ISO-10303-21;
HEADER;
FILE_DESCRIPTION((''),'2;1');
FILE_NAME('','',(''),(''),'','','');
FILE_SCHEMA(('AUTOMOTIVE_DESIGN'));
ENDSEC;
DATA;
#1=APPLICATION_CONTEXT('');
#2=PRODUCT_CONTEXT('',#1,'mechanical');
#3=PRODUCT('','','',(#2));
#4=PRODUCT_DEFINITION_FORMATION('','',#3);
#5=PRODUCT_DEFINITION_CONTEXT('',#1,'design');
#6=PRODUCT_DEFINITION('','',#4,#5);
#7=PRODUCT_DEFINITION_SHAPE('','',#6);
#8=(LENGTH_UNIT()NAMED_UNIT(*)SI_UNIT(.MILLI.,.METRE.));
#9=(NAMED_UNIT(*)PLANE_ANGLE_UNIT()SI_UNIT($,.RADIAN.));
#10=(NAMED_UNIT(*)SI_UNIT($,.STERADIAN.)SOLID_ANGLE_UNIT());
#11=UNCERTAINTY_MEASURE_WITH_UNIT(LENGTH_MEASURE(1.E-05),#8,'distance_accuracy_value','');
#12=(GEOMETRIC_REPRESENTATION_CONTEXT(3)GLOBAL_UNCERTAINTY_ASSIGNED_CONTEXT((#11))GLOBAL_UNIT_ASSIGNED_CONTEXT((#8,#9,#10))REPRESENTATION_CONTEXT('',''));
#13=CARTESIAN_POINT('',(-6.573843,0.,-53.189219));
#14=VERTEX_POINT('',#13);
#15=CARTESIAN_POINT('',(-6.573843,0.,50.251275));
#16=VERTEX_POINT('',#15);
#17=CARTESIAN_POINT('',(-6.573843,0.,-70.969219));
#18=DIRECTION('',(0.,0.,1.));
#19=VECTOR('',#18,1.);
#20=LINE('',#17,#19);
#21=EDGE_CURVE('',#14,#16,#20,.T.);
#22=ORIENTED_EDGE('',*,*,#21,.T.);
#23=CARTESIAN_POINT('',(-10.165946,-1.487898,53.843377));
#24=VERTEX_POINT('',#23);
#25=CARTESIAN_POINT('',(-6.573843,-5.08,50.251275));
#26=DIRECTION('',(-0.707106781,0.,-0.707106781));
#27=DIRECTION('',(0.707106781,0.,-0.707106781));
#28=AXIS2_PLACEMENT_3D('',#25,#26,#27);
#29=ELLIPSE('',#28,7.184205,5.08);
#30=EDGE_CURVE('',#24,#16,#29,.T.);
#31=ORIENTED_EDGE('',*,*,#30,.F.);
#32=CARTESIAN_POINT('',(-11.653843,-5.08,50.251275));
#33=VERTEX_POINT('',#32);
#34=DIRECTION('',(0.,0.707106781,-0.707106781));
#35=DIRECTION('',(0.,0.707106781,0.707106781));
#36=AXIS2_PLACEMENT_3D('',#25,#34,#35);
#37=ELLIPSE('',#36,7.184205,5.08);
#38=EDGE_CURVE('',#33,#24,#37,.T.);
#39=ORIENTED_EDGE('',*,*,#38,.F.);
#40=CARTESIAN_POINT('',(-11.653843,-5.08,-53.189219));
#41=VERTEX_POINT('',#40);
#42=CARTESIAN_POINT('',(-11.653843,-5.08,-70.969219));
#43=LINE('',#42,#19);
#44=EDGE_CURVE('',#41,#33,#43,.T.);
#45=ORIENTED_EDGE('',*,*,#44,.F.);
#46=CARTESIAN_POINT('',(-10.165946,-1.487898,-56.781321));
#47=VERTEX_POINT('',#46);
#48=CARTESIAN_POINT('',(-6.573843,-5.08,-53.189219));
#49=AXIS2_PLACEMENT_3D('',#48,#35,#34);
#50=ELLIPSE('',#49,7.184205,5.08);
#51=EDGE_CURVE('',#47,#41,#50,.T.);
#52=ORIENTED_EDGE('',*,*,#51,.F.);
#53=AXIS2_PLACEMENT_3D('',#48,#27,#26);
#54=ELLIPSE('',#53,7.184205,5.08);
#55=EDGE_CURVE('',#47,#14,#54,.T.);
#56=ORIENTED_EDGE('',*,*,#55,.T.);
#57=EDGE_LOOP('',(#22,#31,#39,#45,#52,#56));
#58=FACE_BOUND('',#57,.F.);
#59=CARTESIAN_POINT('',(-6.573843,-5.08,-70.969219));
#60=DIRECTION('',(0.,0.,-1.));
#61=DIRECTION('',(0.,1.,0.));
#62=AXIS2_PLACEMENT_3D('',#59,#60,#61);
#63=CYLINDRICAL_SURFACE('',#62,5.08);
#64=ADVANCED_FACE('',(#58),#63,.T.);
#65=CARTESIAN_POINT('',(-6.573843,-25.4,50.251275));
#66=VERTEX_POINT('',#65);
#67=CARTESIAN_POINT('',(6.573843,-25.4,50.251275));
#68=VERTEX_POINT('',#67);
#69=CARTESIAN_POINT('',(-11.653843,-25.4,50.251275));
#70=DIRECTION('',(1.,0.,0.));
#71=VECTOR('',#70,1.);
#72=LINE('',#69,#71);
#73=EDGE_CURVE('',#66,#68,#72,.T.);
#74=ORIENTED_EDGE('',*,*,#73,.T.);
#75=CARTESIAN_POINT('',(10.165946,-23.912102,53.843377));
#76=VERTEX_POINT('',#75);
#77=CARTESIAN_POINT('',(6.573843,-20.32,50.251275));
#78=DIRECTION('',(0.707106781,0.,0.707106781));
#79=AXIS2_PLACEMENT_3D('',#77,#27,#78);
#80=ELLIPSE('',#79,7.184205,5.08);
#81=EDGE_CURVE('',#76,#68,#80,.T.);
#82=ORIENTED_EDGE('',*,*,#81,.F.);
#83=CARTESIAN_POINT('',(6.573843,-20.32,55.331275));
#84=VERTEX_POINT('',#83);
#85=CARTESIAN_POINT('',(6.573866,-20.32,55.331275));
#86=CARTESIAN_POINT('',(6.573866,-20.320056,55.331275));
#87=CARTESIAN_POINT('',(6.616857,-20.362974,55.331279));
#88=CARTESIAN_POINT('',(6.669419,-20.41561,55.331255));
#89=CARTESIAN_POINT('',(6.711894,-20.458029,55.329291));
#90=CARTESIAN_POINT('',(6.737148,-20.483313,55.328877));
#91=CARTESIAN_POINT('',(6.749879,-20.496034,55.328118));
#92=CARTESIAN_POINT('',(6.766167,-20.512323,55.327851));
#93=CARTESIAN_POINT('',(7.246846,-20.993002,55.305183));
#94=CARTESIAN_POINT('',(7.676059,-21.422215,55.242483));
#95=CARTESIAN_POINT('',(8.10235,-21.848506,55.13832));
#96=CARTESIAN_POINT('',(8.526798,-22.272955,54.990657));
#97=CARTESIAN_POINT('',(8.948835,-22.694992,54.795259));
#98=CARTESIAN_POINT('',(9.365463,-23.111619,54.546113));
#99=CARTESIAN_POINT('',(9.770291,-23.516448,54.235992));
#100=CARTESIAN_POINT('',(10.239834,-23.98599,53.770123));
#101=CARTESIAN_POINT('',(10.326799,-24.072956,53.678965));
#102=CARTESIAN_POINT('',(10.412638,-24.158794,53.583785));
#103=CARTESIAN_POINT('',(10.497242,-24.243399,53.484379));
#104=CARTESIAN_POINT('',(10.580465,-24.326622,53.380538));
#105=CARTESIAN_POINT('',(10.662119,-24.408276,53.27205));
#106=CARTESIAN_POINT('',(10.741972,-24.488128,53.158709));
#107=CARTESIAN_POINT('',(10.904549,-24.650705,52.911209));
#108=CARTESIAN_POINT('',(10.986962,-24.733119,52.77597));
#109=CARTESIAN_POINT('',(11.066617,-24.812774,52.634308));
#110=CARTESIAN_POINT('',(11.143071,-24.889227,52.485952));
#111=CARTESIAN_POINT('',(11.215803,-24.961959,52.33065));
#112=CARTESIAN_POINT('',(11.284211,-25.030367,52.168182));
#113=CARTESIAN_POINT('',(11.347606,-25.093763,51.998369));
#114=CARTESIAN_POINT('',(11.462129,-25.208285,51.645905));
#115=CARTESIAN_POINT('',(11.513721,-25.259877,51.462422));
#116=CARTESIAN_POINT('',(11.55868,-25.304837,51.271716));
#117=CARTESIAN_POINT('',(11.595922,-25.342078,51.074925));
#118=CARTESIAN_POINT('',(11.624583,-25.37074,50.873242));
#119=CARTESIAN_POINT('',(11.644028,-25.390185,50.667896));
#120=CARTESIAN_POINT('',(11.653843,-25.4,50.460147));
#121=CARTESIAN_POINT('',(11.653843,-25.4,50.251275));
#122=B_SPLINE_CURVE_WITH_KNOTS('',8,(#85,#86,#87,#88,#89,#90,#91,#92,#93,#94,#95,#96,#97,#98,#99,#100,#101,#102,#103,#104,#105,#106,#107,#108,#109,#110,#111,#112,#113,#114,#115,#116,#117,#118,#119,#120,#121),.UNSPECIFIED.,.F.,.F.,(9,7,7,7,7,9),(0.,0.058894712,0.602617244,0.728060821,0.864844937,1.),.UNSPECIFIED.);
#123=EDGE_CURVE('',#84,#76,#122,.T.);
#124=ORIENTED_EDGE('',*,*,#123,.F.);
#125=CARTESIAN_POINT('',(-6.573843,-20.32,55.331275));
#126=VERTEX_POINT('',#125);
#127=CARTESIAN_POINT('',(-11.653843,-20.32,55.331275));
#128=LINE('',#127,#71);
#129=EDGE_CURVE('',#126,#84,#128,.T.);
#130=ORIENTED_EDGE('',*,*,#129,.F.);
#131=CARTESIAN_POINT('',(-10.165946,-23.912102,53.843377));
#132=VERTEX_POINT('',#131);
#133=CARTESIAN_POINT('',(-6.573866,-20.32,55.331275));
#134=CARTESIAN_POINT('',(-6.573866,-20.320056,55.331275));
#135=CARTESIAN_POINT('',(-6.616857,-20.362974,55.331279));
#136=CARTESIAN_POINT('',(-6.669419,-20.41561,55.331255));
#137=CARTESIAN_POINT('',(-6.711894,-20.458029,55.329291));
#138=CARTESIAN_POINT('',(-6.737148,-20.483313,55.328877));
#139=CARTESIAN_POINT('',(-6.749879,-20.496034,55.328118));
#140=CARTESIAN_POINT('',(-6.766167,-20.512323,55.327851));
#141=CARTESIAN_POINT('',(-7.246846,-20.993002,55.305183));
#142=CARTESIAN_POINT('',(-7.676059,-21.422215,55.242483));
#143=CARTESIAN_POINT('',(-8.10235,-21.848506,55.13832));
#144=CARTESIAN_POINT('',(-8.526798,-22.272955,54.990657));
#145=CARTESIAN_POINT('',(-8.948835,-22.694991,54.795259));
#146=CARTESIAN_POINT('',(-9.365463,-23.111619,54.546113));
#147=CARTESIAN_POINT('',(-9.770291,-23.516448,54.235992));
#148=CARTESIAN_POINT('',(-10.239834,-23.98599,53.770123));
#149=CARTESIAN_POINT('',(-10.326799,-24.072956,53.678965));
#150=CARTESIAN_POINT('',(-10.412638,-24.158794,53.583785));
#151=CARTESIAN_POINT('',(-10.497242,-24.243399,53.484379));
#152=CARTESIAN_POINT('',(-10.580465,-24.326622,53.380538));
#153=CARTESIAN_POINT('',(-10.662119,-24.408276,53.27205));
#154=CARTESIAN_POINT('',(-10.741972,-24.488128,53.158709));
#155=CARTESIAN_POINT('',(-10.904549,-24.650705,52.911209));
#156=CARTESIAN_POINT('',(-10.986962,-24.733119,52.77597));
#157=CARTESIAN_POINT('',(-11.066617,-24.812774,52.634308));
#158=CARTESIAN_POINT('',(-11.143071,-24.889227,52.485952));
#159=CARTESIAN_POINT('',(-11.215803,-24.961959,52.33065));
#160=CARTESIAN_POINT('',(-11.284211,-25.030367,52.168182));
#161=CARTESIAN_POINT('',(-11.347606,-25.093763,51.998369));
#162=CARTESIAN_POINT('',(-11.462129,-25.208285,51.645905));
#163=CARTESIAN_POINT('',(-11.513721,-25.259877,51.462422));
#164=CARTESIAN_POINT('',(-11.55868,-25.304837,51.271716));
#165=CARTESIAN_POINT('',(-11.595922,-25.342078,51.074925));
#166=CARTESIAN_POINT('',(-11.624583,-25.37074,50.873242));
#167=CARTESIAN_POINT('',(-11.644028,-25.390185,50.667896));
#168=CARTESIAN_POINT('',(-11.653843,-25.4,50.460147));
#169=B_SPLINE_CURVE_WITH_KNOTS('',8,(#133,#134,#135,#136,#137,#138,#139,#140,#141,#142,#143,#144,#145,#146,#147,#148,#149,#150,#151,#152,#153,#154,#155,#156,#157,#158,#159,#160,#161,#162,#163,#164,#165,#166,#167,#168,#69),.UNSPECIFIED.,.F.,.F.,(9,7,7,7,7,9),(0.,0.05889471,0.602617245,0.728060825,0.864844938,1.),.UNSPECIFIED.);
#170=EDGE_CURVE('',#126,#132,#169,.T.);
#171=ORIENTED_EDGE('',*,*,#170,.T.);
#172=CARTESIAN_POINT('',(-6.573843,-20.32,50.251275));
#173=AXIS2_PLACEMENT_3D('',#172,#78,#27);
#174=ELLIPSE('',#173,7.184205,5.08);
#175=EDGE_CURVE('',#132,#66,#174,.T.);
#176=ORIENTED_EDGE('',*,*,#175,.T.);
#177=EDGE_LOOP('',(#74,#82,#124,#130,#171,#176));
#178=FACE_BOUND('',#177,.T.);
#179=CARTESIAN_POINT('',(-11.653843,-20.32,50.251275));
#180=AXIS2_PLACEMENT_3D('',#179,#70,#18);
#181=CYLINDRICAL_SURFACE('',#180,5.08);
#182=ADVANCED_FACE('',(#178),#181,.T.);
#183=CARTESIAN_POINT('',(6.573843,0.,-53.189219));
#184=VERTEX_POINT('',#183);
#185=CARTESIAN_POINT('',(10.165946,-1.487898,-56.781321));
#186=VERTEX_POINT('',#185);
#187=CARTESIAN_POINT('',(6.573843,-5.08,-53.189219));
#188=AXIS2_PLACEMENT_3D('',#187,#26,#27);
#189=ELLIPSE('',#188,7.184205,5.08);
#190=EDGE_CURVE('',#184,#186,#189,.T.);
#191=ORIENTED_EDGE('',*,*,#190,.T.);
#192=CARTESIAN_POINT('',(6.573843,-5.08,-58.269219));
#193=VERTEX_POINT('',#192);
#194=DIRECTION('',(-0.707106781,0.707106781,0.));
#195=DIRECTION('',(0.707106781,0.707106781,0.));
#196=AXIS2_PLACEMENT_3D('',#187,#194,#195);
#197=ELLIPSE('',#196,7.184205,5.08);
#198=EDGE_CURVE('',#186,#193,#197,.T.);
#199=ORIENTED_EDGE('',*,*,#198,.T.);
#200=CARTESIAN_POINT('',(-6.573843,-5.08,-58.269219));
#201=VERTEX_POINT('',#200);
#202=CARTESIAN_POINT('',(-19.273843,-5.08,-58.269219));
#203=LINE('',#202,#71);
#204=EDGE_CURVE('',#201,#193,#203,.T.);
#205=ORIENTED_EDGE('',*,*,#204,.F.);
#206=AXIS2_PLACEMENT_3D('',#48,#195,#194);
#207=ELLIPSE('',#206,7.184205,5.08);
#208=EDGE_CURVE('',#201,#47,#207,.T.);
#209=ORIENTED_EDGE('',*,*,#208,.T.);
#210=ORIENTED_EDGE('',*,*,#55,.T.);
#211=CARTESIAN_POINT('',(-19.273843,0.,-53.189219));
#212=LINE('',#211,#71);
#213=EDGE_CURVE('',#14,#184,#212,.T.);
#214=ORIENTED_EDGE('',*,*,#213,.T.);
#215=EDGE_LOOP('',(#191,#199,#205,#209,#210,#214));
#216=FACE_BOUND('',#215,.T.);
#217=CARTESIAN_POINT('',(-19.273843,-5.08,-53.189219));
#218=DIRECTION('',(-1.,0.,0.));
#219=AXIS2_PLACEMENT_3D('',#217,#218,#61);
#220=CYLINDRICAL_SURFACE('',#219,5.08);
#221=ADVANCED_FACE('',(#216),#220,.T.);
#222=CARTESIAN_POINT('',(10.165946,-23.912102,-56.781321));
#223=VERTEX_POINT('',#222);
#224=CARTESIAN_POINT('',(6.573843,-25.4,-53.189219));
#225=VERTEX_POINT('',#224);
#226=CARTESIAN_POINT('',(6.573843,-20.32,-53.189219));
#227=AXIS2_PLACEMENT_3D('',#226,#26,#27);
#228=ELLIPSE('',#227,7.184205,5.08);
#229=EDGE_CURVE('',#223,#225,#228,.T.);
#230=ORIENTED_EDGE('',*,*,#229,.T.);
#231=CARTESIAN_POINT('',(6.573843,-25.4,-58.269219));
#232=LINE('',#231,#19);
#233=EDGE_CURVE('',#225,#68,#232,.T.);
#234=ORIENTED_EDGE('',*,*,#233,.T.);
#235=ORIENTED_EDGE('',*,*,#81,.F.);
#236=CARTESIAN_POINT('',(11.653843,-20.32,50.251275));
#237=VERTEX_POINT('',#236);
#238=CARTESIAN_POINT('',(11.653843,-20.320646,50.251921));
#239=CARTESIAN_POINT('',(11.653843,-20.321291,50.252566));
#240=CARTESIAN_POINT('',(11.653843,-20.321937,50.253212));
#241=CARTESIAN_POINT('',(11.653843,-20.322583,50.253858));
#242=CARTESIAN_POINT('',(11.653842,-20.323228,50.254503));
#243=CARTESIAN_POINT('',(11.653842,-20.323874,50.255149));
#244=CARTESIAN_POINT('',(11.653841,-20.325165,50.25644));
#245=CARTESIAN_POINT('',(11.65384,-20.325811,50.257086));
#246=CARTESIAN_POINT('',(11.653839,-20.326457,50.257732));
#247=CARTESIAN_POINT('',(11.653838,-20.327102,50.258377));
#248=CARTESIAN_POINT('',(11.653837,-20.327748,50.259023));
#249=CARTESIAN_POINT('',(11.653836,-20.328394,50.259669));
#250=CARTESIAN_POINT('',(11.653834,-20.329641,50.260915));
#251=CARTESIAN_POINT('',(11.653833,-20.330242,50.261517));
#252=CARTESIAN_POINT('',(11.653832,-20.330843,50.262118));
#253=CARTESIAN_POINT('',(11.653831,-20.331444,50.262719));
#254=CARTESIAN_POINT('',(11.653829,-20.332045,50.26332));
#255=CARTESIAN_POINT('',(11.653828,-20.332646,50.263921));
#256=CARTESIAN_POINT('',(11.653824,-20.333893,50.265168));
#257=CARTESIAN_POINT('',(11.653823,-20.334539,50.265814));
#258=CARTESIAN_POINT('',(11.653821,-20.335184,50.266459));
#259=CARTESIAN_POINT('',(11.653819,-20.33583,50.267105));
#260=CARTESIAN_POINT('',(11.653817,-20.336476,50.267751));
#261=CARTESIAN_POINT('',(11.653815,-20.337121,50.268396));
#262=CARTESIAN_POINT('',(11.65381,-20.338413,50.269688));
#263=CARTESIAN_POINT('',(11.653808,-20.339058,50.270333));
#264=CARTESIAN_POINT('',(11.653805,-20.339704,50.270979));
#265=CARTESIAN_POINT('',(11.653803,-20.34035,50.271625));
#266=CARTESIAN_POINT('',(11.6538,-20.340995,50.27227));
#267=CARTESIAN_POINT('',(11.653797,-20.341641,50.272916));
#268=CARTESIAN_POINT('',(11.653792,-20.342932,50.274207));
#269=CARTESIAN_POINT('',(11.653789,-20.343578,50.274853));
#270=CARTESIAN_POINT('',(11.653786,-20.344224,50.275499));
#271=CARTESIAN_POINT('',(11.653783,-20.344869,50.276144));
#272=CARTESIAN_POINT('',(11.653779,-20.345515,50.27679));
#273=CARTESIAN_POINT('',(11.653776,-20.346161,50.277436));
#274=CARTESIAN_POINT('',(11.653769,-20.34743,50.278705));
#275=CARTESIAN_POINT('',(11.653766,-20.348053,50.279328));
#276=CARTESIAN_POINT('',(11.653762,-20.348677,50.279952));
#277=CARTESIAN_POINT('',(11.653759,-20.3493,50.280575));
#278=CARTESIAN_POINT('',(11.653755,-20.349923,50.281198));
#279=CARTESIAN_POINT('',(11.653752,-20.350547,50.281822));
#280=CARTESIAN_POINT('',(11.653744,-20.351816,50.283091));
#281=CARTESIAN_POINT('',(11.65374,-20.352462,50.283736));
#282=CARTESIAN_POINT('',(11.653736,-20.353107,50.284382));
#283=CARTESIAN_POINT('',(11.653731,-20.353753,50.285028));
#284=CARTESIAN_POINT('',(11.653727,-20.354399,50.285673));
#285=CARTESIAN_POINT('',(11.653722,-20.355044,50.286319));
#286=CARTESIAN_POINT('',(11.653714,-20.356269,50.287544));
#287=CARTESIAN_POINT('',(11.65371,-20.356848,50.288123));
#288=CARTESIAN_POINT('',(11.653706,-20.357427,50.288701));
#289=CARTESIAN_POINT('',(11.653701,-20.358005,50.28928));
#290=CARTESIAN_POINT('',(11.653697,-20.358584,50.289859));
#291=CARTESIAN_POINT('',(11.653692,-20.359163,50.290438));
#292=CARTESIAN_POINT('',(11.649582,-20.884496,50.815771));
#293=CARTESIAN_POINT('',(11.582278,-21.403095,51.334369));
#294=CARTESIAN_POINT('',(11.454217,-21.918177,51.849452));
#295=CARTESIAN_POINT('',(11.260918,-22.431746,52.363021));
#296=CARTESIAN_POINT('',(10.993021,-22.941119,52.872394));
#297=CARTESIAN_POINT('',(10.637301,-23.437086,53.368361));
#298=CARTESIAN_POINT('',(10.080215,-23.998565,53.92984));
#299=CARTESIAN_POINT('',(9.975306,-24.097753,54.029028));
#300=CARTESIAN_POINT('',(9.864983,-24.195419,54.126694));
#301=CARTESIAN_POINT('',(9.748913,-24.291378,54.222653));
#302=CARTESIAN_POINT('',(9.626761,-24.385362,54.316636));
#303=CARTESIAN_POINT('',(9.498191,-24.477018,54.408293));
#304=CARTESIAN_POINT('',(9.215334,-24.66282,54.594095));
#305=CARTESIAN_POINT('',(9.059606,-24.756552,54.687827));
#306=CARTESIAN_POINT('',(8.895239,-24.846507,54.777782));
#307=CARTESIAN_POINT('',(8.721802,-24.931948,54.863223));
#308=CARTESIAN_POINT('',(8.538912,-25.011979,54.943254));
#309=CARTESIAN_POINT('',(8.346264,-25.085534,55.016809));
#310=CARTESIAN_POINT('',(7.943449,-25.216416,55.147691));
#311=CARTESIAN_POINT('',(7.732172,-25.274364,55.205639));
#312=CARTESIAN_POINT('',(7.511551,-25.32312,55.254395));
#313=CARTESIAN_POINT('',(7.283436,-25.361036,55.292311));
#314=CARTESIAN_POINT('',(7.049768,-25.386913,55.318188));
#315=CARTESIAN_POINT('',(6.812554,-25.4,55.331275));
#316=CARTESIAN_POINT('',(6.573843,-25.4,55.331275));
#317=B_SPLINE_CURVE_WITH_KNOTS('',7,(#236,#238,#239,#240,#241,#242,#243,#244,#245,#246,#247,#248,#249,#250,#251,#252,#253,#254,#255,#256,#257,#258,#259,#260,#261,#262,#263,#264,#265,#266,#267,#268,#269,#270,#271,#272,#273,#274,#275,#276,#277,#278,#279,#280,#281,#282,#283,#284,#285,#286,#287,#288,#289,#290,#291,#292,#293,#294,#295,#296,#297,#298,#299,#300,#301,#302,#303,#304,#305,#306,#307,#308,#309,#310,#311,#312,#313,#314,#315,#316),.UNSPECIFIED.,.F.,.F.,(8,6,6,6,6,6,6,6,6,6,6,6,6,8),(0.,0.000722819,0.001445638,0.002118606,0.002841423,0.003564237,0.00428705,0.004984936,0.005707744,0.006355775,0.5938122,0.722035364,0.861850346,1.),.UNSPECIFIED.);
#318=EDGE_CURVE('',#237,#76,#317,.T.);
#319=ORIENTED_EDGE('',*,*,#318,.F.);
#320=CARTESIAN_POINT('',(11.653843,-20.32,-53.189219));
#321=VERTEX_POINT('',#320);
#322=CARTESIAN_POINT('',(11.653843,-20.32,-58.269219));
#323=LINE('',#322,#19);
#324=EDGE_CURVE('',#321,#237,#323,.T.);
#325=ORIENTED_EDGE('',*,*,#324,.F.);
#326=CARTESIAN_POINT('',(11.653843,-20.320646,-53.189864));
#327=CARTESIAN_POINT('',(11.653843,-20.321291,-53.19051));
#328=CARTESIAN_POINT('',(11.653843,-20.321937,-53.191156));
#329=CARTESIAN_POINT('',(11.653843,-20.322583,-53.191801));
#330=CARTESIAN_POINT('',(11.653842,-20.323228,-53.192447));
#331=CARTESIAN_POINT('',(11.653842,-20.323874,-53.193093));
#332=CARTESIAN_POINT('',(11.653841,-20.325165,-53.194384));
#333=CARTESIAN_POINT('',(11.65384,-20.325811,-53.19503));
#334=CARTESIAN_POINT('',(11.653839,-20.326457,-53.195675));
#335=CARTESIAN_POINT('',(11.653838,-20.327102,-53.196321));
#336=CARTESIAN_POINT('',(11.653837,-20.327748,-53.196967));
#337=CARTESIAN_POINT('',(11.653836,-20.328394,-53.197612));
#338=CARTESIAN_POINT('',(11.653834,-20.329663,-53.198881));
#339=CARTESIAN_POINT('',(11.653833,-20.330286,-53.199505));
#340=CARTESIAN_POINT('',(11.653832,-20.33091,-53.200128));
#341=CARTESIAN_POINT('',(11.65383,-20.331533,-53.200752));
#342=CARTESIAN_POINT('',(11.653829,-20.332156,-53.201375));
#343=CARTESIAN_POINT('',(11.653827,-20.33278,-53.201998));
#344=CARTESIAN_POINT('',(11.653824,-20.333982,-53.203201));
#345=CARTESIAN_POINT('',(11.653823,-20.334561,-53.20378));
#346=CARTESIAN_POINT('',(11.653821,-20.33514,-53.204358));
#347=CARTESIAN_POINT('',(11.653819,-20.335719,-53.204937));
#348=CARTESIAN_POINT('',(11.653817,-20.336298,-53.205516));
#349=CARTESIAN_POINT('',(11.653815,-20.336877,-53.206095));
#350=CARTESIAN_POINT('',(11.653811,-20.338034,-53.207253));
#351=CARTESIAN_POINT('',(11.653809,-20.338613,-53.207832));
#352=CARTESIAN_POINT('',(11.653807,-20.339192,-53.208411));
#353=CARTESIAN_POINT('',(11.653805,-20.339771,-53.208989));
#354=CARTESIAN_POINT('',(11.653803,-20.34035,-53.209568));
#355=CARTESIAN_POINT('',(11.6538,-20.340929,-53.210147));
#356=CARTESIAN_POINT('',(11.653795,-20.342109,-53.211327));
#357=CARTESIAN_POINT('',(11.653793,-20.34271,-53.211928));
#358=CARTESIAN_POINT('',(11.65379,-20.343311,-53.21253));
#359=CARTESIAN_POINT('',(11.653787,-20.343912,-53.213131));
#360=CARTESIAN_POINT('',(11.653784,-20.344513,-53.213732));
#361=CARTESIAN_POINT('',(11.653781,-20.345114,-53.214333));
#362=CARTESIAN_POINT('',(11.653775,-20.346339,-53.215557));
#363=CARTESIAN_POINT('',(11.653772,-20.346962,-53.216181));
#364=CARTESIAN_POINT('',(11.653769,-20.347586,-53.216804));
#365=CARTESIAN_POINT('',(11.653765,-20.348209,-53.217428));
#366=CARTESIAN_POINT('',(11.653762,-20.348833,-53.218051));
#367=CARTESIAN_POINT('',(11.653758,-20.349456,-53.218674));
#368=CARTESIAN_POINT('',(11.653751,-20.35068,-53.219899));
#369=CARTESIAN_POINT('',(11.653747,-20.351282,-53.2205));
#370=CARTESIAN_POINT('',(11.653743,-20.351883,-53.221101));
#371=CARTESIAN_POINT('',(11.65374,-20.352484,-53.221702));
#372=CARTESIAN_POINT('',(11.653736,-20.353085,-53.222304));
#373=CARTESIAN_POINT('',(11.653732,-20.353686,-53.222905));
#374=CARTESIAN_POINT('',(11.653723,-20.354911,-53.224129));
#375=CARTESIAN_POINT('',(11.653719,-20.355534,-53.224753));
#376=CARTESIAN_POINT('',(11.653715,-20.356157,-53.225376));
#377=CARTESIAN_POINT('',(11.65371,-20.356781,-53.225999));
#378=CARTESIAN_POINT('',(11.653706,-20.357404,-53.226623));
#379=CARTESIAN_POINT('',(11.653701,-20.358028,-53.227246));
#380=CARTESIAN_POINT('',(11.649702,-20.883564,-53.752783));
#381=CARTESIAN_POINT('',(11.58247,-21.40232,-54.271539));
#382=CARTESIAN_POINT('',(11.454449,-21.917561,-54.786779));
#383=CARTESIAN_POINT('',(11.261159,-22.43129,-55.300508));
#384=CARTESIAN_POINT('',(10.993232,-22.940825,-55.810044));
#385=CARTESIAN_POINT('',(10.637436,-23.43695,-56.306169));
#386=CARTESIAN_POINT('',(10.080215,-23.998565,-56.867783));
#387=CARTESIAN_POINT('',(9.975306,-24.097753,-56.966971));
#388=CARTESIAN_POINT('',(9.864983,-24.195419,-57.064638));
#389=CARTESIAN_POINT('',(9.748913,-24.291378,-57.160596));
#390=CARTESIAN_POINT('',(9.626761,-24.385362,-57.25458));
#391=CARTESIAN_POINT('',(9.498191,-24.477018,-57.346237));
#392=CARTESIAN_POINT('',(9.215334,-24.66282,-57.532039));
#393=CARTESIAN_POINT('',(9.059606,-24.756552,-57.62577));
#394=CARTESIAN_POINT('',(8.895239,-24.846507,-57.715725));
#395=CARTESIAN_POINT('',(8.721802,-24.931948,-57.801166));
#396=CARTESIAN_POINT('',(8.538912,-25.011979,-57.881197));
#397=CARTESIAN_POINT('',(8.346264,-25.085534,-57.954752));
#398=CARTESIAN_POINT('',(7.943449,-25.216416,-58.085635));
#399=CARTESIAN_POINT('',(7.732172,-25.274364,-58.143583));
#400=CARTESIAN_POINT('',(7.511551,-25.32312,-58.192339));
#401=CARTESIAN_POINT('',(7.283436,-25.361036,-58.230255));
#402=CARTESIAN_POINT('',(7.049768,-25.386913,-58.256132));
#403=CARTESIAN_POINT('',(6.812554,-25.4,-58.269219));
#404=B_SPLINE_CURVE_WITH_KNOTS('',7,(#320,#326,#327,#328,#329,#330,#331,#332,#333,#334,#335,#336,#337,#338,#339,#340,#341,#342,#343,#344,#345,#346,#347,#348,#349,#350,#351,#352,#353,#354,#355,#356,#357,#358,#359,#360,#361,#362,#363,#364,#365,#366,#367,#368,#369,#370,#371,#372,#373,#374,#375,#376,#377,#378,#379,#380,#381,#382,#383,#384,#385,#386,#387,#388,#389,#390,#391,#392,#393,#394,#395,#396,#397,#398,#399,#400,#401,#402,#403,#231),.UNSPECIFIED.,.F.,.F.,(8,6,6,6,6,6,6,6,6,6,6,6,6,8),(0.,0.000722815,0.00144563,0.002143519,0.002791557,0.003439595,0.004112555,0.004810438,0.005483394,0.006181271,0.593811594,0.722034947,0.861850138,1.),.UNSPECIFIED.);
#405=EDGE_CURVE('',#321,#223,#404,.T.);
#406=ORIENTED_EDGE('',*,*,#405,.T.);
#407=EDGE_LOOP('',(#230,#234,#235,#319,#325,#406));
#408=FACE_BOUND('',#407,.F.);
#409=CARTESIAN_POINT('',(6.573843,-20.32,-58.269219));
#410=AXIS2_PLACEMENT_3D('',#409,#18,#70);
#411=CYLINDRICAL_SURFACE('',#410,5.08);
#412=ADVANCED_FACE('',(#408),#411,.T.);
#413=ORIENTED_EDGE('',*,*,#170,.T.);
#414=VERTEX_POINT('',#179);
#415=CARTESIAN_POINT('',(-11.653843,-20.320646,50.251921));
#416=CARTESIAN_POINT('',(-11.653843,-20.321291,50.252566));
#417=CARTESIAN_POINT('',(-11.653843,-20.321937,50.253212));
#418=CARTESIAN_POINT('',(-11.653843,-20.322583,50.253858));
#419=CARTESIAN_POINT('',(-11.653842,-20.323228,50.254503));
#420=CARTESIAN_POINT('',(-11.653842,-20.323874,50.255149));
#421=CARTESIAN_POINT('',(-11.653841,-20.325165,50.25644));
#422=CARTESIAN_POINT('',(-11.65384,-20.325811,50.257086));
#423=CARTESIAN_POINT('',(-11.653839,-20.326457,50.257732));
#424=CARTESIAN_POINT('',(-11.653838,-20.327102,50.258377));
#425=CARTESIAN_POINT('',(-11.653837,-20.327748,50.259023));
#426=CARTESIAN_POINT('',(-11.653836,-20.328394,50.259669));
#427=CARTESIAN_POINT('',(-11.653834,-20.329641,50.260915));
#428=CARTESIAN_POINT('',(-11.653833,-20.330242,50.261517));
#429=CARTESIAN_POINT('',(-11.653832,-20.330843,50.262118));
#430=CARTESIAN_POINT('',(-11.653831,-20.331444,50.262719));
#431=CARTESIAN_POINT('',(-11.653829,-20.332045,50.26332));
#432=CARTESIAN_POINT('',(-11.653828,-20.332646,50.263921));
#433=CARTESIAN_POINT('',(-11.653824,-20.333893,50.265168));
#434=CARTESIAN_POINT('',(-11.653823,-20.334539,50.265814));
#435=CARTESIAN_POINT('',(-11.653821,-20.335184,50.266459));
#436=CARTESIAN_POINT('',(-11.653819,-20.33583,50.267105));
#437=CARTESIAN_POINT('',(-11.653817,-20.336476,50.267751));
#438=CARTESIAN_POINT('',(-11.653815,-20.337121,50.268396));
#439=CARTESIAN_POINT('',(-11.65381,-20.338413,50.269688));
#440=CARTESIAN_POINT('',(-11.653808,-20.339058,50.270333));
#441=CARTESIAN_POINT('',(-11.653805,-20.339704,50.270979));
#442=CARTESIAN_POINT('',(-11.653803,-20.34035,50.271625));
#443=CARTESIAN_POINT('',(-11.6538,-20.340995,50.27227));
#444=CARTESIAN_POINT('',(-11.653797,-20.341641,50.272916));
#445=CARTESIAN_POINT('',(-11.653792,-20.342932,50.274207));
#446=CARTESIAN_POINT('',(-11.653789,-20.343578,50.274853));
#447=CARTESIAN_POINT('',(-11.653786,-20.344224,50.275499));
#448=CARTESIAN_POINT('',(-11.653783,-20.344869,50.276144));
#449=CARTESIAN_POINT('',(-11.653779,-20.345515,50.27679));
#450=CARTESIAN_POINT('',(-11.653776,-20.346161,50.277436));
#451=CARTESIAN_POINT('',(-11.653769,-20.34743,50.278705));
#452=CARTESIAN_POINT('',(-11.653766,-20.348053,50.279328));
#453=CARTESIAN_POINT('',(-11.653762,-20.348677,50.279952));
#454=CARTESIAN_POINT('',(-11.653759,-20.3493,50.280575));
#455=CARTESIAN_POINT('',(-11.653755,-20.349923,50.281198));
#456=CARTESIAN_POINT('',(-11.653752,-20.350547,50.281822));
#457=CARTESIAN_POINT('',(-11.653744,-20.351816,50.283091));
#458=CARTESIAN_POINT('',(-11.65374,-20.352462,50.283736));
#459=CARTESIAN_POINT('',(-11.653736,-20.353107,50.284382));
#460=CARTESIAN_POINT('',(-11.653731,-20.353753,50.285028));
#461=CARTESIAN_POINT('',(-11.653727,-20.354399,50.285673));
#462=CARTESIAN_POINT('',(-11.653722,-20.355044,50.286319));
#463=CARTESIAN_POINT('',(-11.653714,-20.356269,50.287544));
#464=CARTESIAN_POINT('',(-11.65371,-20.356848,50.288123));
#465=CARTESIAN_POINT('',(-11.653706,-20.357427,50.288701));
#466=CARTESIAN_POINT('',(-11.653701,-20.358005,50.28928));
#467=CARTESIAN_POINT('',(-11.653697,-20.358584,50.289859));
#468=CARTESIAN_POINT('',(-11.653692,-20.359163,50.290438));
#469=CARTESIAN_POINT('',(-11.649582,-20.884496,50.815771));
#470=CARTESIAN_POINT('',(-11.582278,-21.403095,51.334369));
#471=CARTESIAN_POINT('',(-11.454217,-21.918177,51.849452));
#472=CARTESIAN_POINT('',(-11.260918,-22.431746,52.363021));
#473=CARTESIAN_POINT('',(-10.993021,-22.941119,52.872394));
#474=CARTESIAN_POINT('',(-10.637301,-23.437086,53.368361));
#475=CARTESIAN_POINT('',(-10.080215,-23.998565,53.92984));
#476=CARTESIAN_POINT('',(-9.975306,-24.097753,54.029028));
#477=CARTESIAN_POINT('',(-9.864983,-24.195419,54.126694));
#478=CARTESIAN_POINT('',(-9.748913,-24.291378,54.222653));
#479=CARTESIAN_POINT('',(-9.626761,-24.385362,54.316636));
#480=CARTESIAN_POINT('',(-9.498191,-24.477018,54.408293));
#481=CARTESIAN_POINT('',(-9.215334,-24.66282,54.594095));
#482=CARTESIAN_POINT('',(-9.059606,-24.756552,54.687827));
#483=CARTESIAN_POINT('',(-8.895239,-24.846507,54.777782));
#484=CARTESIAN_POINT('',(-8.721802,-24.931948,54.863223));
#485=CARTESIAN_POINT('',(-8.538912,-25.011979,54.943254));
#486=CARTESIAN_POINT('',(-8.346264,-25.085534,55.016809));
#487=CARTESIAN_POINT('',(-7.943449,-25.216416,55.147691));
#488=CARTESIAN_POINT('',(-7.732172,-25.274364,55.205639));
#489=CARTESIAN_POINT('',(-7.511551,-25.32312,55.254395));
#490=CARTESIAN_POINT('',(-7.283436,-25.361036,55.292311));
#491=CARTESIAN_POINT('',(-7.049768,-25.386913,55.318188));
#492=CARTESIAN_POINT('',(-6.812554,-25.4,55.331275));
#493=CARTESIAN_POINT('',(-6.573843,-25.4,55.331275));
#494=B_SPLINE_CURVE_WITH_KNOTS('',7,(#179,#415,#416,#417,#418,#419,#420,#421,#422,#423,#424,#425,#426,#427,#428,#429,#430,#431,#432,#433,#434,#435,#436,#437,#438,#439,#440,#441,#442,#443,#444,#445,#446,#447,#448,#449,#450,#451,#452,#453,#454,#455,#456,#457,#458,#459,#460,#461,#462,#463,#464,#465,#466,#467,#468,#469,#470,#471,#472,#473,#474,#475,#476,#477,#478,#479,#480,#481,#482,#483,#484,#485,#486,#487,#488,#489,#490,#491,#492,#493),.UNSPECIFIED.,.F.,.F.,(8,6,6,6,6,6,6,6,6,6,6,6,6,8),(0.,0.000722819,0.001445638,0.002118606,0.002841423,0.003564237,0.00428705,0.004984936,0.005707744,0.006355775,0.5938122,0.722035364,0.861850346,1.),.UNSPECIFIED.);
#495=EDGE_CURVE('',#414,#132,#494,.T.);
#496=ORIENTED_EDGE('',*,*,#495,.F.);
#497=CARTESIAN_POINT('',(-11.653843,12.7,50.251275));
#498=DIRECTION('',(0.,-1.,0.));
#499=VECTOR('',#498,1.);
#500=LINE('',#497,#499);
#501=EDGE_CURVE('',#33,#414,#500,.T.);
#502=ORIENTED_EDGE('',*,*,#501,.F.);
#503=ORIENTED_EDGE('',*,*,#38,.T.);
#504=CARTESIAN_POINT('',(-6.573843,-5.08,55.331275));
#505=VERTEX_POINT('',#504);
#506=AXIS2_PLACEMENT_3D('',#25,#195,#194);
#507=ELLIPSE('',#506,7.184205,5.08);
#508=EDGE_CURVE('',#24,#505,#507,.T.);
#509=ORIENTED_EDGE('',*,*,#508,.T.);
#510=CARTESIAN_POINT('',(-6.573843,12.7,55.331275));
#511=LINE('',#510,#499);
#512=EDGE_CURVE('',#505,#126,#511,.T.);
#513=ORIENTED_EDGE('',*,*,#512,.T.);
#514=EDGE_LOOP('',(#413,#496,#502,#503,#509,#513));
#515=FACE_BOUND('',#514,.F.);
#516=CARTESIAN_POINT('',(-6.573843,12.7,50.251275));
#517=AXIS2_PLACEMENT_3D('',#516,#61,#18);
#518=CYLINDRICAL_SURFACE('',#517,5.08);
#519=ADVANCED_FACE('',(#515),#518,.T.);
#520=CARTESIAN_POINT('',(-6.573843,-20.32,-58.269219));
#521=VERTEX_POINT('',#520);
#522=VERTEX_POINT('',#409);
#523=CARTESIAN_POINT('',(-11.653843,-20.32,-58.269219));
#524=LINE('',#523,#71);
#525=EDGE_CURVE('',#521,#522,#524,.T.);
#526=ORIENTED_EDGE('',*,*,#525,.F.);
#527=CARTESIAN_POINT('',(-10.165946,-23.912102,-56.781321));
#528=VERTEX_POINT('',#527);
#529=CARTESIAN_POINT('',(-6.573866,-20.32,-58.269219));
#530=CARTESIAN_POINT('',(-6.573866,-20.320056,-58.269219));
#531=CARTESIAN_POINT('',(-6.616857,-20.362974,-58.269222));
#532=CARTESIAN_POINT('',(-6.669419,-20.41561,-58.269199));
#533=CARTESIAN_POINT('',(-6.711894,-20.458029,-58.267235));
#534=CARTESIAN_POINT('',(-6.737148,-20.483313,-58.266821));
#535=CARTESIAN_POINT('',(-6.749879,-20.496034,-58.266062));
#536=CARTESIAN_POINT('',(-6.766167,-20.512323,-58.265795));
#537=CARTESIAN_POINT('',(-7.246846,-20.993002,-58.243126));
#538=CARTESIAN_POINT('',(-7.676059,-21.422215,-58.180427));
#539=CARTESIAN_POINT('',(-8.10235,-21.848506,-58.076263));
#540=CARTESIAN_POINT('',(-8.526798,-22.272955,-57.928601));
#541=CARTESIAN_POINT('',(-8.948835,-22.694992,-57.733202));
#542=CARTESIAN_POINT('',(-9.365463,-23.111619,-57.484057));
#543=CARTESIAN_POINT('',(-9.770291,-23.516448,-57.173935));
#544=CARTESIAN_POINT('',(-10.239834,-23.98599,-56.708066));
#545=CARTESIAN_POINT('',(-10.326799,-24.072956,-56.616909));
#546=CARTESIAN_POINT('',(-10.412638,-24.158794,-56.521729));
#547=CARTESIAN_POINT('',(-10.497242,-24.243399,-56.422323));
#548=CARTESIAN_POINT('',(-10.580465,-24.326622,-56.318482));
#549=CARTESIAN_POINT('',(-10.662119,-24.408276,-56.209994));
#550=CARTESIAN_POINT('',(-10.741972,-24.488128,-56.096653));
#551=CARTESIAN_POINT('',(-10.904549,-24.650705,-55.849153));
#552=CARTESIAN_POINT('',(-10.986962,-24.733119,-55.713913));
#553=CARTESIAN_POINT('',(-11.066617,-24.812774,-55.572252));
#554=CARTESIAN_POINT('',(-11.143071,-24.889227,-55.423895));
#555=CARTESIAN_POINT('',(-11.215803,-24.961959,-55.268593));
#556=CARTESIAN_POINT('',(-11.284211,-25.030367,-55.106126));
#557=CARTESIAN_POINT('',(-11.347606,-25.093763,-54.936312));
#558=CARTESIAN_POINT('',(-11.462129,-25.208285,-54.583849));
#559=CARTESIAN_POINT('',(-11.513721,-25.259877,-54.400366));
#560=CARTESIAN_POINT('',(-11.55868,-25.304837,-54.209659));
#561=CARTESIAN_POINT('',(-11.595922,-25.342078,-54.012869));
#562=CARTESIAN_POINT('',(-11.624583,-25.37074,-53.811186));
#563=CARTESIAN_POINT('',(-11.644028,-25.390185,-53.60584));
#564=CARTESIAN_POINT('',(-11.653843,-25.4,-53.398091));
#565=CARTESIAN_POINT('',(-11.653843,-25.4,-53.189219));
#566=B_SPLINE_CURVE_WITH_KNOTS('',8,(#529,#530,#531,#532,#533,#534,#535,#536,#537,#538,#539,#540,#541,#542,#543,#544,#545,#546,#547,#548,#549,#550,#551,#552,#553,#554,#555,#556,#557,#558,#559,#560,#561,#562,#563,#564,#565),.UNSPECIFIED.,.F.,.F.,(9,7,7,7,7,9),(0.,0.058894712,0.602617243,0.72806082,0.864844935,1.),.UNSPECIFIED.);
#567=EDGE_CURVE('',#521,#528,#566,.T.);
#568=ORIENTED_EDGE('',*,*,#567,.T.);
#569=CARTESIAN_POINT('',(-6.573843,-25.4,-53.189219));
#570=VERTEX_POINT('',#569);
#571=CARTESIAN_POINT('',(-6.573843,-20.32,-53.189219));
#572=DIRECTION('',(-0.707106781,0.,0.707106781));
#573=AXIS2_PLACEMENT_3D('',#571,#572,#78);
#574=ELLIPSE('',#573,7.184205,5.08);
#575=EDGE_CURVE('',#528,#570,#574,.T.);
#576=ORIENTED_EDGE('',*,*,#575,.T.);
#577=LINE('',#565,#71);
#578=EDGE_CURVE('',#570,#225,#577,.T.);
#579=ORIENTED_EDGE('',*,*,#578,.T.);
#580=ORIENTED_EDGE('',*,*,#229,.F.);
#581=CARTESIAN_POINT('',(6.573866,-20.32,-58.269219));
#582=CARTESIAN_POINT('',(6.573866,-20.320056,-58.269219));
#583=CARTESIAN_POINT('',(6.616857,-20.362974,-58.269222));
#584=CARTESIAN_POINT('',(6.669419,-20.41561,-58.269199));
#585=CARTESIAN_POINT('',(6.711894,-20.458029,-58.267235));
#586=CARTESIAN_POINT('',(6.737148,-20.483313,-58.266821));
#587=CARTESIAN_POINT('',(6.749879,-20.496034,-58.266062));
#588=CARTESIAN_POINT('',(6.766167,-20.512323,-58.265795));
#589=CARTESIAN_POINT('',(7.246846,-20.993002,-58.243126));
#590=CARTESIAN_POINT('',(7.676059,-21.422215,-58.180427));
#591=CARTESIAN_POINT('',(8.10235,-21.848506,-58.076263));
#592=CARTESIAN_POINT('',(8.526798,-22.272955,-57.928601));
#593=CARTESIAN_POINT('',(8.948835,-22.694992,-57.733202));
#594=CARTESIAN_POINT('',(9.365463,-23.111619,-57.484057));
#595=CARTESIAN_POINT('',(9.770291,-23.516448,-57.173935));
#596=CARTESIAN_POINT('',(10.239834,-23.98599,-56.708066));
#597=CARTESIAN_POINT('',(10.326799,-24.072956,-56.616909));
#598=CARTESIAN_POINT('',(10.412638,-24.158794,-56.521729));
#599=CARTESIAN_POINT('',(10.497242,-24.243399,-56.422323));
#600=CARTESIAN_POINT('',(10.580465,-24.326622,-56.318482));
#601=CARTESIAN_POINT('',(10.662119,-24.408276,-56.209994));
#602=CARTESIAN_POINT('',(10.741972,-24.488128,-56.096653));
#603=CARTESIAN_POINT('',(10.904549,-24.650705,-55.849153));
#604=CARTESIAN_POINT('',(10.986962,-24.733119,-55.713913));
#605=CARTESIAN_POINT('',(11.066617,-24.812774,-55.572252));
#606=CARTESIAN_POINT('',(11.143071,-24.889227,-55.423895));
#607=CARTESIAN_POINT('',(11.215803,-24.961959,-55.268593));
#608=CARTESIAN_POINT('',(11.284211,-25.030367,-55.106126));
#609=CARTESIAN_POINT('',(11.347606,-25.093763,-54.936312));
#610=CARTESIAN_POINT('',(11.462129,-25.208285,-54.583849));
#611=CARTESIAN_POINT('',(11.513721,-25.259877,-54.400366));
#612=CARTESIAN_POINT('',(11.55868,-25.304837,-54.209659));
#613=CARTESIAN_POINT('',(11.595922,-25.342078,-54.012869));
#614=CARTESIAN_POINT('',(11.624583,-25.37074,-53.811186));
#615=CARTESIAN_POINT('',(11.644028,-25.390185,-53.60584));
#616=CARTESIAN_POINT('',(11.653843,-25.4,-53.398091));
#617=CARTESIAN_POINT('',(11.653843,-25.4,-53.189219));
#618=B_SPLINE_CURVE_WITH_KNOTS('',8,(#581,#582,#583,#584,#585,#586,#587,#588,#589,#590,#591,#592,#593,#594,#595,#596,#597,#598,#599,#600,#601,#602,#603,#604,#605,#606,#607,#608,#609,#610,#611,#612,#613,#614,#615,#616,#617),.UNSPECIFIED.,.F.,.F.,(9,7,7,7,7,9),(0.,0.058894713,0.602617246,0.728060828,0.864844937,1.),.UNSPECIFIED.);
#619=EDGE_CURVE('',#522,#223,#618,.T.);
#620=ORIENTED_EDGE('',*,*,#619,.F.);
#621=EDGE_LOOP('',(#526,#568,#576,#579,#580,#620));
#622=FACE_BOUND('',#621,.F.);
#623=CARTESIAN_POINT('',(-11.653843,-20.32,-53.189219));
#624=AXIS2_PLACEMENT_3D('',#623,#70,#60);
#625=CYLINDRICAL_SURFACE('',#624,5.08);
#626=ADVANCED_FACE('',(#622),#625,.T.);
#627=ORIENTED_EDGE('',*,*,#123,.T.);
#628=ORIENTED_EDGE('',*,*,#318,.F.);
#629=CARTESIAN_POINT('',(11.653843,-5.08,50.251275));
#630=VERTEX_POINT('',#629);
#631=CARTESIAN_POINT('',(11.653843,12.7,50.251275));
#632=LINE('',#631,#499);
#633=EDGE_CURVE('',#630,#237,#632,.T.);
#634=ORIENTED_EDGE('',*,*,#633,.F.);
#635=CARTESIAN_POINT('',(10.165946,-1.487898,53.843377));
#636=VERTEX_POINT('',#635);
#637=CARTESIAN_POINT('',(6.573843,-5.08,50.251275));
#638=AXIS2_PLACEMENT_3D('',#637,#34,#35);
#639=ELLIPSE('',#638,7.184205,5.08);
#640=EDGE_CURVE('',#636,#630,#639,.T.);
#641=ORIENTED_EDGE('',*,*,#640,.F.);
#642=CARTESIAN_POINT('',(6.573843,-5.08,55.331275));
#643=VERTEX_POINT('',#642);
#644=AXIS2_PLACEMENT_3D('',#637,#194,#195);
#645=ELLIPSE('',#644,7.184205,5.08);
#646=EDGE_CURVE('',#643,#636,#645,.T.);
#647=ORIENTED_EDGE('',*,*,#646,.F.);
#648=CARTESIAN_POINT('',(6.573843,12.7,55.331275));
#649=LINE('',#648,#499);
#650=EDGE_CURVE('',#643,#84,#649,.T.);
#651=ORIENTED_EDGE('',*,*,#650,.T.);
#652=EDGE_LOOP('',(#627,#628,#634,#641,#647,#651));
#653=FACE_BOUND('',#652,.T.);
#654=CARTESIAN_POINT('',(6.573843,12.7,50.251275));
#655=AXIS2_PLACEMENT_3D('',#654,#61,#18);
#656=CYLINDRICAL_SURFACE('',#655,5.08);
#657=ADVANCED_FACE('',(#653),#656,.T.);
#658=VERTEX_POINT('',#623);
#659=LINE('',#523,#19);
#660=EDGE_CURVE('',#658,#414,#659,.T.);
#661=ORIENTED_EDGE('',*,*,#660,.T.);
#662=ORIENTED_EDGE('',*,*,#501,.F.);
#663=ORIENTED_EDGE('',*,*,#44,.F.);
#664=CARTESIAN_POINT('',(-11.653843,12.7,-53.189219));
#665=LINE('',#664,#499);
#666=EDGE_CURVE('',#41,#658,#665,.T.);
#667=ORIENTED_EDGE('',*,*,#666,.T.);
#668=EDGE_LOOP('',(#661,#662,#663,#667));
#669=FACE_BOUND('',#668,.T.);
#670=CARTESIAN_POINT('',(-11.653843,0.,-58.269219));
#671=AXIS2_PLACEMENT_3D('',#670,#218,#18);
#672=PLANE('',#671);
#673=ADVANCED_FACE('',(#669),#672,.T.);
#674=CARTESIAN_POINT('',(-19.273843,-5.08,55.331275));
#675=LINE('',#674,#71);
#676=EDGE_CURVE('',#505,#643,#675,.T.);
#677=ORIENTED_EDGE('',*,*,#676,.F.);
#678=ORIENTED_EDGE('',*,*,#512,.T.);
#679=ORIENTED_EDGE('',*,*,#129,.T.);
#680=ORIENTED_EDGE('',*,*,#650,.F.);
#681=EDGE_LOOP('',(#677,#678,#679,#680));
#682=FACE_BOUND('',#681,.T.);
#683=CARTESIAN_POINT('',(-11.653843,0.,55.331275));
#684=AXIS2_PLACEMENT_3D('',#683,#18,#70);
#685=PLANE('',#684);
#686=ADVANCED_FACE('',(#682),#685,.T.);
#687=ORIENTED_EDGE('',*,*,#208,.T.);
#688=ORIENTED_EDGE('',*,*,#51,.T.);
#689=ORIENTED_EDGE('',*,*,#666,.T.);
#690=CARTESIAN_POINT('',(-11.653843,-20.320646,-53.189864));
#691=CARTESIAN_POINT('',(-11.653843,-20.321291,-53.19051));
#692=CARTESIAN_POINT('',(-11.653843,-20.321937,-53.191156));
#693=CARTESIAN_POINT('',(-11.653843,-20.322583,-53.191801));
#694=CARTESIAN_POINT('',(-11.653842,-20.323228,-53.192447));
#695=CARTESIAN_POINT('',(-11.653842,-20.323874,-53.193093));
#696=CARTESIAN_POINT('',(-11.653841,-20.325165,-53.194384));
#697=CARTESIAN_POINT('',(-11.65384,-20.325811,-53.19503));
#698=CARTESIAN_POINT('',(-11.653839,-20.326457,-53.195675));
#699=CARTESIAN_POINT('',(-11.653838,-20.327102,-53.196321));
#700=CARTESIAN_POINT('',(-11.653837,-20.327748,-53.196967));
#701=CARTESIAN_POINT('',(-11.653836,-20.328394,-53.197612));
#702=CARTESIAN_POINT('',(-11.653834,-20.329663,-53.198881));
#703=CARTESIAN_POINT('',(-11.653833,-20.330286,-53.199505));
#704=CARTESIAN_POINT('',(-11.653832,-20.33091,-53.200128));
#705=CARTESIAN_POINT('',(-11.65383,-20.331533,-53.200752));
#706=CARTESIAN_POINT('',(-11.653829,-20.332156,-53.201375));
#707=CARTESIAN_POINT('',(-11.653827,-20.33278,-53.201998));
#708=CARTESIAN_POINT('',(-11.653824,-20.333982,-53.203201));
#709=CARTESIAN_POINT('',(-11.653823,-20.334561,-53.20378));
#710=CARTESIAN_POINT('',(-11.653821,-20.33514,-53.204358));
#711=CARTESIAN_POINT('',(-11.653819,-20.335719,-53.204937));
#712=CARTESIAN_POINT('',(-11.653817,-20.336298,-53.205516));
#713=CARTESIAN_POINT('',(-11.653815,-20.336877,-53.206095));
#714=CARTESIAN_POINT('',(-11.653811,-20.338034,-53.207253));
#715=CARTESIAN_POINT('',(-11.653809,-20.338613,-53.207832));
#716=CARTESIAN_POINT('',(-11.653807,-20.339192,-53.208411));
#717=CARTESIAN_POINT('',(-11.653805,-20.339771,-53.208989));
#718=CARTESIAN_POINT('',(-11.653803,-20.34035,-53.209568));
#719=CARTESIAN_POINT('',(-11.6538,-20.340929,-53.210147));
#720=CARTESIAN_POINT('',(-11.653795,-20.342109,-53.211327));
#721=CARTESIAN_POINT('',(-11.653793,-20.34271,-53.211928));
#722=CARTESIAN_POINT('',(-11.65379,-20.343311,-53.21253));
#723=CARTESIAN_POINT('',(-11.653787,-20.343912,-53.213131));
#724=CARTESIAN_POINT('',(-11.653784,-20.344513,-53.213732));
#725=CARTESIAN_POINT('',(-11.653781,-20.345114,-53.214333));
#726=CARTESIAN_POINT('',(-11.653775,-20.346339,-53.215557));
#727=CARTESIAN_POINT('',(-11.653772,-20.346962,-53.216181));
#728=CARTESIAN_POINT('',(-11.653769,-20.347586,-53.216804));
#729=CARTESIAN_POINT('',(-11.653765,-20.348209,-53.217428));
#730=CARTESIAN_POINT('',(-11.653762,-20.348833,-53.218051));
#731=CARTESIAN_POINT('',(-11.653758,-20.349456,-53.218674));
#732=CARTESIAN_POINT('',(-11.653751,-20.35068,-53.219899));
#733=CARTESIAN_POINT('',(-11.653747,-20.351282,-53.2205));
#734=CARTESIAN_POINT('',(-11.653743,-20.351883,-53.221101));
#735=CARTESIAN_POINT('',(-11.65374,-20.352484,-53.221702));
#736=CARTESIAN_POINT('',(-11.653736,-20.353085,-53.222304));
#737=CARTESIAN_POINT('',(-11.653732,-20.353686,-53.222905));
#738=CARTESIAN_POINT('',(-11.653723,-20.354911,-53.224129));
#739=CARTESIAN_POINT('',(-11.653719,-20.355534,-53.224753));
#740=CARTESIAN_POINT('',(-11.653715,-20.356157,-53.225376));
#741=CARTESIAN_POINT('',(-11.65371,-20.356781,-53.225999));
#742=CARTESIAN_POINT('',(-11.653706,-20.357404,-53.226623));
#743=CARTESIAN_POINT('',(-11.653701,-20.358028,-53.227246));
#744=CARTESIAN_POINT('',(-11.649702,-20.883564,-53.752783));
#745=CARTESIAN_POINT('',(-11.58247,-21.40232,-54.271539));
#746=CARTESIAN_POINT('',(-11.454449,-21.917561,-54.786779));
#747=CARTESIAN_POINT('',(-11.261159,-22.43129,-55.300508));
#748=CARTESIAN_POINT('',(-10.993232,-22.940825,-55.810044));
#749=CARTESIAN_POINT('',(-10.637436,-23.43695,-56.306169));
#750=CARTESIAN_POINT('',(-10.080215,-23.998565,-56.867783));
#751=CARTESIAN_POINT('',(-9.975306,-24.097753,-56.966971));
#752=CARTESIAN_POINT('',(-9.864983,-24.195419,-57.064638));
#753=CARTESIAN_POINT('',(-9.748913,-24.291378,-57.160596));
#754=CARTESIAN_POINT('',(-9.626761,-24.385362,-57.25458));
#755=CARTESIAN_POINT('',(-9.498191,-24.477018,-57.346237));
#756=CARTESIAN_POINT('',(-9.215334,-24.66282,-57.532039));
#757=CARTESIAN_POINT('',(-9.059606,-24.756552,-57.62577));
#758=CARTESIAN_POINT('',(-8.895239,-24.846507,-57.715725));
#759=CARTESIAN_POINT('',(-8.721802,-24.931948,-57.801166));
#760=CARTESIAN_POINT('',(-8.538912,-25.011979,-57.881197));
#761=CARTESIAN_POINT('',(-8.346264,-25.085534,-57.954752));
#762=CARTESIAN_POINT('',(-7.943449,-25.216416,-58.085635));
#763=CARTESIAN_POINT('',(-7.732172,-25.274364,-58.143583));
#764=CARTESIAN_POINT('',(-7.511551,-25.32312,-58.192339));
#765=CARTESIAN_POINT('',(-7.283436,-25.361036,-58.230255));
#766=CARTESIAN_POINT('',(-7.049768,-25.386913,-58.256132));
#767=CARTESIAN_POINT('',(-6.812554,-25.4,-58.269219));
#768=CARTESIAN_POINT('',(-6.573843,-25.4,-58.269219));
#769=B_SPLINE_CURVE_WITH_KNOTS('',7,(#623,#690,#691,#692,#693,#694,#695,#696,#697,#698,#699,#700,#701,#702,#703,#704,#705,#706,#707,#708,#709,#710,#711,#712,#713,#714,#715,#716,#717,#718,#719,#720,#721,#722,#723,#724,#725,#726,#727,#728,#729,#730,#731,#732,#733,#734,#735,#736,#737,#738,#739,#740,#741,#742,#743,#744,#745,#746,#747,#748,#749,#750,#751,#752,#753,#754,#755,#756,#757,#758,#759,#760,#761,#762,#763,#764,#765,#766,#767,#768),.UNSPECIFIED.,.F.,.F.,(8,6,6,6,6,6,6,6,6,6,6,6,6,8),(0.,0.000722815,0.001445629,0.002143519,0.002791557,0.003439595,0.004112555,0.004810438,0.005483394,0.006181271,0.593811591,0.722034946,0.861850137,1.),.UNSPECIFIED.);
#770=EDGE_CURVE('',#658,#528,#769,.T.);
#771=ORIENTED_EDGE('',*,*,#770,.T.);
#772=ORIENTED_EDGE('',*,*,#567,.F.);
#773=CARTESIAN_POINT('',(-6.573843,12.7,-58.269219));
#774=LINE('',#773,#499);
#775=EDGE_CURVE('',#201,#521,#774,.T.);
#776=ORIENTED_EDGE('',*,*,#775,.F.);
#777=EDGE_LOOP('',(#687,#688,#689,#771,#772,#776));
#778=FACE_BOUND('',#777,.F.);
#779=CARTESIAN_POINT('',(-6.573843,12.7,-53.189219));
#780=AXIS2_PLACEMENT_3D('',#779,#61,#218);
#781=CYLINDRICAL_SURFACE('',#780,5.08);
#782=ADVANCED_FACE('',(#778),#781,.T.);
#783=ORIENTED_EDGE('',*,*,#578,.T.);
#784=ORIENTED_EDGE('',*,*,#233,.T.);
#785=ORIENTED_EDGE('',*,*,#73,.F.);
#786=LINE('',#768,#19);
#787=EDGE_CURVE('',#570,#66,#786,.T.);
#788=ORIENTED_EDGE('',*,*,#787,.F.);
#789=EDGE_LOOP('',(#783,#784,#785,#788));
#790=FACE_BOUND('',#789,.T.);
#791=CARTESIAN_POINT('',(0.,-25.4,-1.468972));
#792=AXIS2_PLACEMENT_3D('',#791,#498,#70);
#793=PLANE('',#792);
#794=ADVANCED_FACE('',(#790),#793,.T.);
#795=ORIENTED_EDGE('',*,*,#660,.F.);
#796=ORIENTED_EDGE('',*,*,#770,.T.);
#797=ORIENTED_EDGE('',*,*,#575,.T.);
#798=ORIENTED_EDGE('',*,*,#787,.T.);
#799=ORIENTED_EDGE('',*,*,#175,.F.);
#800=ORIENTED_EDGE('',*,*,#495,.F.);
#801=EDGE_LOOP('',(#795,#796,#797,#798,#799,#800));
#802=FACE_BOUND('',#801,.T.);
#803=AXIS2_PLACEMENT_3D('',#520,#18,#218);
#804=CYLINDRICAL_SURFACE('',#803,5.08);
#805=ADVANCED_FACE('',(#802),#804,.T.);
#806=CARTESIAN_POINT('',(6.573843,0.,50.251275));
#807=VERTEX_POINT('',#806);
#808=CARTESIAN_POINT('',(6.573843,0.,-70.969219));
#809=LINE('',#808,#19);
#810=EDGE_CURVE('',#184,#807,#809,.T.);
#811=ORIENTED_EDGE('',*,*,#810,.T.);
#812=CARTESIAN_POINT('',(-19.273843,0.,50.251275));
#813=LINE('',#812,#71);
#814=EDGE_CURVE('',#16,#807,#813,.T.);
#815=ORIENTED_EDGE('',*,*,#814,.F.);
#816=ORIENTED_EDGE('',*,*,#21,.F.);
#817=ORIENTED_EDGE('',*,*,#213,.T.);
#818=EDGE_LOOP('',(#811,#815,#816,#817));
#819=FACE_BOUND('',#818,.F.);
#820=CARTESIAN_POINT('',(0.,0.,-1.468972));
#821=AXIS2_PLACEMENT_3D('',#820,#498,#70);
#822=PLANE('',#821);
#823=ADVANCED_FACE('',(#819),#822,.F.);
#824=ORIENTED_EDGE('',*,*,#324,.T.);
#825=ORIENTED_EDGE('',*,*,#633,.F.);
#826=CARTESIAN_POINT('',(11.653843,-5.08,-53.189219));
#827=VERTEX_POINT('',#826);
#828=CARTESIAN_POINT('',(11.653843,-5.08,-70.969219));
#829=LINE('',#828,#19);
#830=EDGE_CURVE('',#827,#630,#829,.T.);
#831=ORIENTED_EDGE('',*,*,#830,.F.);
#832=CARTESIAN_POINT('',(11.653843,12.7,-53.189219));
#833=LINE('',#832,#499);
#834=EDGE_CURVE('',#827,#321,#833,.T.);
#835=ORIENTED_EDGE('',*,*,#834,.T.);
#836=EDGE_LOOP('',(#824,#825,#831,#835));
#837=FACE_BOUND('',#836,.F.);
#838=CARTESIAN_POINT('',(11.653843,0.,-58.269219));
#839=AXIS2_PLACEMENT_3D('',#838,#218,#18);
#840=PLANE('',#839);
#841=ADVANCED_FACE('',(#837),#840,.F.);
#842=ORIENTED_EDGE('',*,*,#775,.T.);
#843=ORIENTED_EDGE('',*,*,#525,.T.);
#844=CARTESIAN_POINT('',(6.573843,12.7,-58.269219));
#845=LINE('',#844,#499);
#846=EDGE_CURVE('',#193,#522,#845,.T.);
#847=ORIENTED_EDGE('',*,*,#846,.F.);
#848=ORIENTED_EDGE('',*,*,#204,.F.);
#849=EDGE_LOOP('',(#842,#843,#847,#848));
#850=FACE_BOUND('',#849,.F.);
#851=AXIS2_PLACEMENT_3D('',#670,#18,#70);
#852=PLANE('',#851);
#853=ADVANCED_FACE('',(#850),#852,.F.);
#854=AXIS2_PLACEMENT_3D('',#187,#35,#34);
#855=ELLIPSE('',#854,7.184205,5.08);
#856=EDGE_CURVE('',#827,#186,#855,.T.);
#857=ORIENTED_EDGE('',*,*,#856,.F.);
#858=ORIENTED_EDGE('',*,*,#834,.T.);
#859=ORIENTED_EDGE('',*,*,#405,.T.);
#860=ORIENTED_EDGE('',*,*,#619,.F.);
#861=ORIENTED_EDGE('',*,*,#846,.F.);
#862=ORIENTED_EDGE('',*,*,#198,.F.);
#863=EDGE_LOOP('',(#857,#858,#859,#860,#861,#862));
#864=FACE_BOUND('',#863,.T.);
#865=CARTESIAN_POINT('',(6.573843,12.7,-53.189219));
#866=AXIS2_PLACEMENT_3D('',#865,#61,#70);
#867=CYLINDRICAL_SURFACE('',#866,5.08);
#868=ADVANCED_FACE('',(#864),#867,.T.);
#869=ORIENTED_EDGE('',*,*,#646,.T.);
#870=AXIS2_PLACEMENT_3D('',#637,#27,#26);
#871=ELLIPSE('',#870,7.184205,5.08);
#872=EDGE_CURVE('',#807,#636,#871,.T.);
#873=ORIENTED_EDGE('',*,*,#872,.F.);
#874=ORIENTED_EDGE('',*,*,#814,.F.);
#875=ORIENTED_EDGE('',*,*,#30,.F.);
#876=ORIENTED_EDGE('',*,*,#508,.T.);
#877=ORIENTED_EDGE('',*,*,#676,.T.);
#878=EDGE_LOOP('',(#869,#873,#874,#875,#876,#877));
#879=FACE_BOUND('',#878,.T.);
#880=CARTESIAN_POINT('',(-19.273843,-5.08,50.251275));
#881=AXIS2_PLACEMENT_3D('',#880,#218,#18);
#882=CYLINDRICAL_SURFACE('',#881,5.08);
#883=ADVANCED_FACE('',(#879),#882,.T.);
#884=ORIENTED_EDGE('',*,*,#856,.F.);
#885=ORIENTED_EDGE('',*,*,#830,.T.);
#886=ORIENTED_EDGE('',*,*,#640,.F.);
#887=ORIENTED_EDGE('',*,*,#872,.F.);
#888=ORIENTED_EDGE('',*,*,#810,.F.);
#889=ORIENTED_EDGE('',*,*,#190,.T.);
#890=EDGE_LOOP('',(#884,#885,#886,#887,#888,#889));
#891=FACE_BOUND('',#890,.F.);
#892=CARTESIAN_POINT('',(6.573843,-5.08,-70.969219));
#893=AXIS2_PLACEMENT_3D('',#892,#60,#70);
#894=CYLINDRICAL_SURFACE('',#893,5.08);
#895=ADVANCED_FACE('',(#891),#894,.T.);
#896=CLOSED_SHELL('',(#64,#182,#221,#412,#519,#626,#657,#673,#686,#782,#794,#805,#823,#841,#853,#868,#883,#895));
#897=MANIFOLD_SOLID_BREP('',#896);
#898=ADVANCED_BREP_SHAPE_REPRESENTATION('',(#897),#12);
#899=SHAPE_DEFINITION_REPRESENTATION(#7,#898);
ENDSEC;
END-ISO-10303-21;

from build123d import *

# Parameters (mm, degrees)
F0_W        = 23.3076866716
F0_H        = 113.6004934087
F1_DEPTH    = 25.4
F2_R        = 5.08
F3_T1_DEPTH = 45.72
F3_T3_DEPTH = 139.0004934087
F4_T1_DEPTH = 45.72
F4_T3_DEPTH = 139.0004934087
F5_T1_DEPTH = 38.5476866716


# Not quite as in the source:
# - a fillet or chamfer that OpenCascade refuses, or shapes differently, is made with other operations: its cross-section is extruded or revolved along the edge and cut away or added


with BuildPart() as f1:
    # F0 (on Front) → F1 (new body)
    with BuildSketch(Plane.XZ):
        with Locations((0, -1.4689718373)):
            Rectangle(F0_W, F0_H)
    extrude(amount=F1_DEPTH)

    # F2
    f2_edges = [f1.edges().sort_by_distance(p)[0] for p in [
        (0, -25.4, 55.331275),
        (-11.653843, -25.4, -1.468972),
        (0, -25.4, -58.269219),
        (11.653843, -25.4, -1.468972),
    ]]
    fillet(f2_edges, radius=F2_R)

    # F3: fillet of radius 5.08 on 4 edges, made by hand

    # F3_s2 → F3_t1 (cut)
    with BuildSketch(Plane.XZ.offset(-12.7)):
        with BuildLine():
            ThreePointArc((11.6538433358, -53.1892185417), (10.1659457842, -56.7813209901), (6.5738433358, -58.2692185417))
            Line((6.5738433358, -58.2692185417), (11.6538433358, -58.2692185417))
            Line((11.6538433358, -58.2692185417), (11.6538433358, -53.1892185417))
        make_face()
        with BuildLine():
            ThreePointArc((6.5738433358, 55.3312748671), (10.1659457842, 53.8433773155), (11.6538433358, 50.2512748671))
            Line((11.6538433358, 50.2512748671), (11.6538433358, 55.3312748671))
            Line((11.6538433358, 55.3312748671), (6.5738433358, 55.3312748671))
        make_face()
    extrude(amount=F3_T1_DEPTH, mode=Mode.SUBTRACT)

    # F3_s4 → F3_t3 (cut)
    with BuildSketch(Plane.XY.offset(-70.9692185417)):
        with BuildLine():
            ThreePointArc((11.6538433358, -5.08), (10.1659457842, -1.4878975516), (6.5738433358, 0))
            Line((6.5738433358, 0), (11.6538433358, 0))
            Line((11.6538433358, 0), (11.6538433358, -5.08))
        make_face()
    extrude(amount=F3_T3_DEPTH, mode=Mode.SUBTRACT)

    # F4: fillet of radius 5.08 on 4 edges, made by hand

    # F4_s2 → F4_t1 (cut)
    with BuildSketch(Plane.XZ.offset(-12.7)):
        with BuildLine():
            ThreePointArc((-6.5738433358, 55.3312748671), (-10.1659457842, 53.8433773155), (-11.6538433358, 50.2512748671))
            Line((-11.6538433358, 50.2512748671), (-11.6538433358, 55.3312748671))
            Line((-11.6538433358, 55.3312748671), (-6.5738433358, 55.3312748671))
        make_face()
        with BuildLine():
            ThreePointArc((-11.6538433358, -53.1892185417), (-10.1659457842, -56.7813209901), (-6.5738433358, -58.2692185417))
            Line((-6.5738433358, -58.2692185417), (-11.6538433358, -58.2692185417))
            Line((-11.6538433358, -58.2692185417), (-11.6538433358, -53.1892185417))
        make_face()
    extrude(amount=F4_T1_DEPTH, mode=Mode.SUBTRACT)

    # F4_s4 → F4_t3 (cut)
    with BuildSketch(Plane.XY.offset(-70.9692185417)):
        with BuildLine():
            ThreePointArc((-6.5738433358, 0), (-10.1659457842, -1.4878975516), (-11.6538433358, -5.08))
            Line((-11.6538433358, -5.08), (-11.6538433358, 0))
            Line((-11.6538433358, 0), (-6.5738433358, 0))
        make_face()
    extrude(amount=F4_T3_DEPTH, mode=Mode.SUBTRACT)

    # F5: fillet of radius 5.08 on 4 edges, made by hand

    # F5_s2 → F5_t1 (cut)
    with BuildSketch(Plane.YZ.offset(-19.2738433358)):
        with BuildLine():
            ThreePointArc((-5.08, 55.3312748671), (-1.4878975516, 53.8433773155), (0, 50.2512748671))
            Line((0, 50.2512748671), (0, 55.3312748671))
            Line((0, 55.3312748671), (-5.08, 55.3312748671))
        make_face()
        with BuildLine():
            ThreePointArc((0, -53.1892185417), (-1.4878975516, -56.7813209901), (-5.08, -58.2692185417))
            Line((-5.08, -58.2692185417), (0, -58.2692185417))
            Line((0, -58.2692185417), (0, -53.1892185417))
        make_face()
    extrude(amount=F5_T1_DEPTH, mode=Mode.SUBTRACT)


solid = f1.part
